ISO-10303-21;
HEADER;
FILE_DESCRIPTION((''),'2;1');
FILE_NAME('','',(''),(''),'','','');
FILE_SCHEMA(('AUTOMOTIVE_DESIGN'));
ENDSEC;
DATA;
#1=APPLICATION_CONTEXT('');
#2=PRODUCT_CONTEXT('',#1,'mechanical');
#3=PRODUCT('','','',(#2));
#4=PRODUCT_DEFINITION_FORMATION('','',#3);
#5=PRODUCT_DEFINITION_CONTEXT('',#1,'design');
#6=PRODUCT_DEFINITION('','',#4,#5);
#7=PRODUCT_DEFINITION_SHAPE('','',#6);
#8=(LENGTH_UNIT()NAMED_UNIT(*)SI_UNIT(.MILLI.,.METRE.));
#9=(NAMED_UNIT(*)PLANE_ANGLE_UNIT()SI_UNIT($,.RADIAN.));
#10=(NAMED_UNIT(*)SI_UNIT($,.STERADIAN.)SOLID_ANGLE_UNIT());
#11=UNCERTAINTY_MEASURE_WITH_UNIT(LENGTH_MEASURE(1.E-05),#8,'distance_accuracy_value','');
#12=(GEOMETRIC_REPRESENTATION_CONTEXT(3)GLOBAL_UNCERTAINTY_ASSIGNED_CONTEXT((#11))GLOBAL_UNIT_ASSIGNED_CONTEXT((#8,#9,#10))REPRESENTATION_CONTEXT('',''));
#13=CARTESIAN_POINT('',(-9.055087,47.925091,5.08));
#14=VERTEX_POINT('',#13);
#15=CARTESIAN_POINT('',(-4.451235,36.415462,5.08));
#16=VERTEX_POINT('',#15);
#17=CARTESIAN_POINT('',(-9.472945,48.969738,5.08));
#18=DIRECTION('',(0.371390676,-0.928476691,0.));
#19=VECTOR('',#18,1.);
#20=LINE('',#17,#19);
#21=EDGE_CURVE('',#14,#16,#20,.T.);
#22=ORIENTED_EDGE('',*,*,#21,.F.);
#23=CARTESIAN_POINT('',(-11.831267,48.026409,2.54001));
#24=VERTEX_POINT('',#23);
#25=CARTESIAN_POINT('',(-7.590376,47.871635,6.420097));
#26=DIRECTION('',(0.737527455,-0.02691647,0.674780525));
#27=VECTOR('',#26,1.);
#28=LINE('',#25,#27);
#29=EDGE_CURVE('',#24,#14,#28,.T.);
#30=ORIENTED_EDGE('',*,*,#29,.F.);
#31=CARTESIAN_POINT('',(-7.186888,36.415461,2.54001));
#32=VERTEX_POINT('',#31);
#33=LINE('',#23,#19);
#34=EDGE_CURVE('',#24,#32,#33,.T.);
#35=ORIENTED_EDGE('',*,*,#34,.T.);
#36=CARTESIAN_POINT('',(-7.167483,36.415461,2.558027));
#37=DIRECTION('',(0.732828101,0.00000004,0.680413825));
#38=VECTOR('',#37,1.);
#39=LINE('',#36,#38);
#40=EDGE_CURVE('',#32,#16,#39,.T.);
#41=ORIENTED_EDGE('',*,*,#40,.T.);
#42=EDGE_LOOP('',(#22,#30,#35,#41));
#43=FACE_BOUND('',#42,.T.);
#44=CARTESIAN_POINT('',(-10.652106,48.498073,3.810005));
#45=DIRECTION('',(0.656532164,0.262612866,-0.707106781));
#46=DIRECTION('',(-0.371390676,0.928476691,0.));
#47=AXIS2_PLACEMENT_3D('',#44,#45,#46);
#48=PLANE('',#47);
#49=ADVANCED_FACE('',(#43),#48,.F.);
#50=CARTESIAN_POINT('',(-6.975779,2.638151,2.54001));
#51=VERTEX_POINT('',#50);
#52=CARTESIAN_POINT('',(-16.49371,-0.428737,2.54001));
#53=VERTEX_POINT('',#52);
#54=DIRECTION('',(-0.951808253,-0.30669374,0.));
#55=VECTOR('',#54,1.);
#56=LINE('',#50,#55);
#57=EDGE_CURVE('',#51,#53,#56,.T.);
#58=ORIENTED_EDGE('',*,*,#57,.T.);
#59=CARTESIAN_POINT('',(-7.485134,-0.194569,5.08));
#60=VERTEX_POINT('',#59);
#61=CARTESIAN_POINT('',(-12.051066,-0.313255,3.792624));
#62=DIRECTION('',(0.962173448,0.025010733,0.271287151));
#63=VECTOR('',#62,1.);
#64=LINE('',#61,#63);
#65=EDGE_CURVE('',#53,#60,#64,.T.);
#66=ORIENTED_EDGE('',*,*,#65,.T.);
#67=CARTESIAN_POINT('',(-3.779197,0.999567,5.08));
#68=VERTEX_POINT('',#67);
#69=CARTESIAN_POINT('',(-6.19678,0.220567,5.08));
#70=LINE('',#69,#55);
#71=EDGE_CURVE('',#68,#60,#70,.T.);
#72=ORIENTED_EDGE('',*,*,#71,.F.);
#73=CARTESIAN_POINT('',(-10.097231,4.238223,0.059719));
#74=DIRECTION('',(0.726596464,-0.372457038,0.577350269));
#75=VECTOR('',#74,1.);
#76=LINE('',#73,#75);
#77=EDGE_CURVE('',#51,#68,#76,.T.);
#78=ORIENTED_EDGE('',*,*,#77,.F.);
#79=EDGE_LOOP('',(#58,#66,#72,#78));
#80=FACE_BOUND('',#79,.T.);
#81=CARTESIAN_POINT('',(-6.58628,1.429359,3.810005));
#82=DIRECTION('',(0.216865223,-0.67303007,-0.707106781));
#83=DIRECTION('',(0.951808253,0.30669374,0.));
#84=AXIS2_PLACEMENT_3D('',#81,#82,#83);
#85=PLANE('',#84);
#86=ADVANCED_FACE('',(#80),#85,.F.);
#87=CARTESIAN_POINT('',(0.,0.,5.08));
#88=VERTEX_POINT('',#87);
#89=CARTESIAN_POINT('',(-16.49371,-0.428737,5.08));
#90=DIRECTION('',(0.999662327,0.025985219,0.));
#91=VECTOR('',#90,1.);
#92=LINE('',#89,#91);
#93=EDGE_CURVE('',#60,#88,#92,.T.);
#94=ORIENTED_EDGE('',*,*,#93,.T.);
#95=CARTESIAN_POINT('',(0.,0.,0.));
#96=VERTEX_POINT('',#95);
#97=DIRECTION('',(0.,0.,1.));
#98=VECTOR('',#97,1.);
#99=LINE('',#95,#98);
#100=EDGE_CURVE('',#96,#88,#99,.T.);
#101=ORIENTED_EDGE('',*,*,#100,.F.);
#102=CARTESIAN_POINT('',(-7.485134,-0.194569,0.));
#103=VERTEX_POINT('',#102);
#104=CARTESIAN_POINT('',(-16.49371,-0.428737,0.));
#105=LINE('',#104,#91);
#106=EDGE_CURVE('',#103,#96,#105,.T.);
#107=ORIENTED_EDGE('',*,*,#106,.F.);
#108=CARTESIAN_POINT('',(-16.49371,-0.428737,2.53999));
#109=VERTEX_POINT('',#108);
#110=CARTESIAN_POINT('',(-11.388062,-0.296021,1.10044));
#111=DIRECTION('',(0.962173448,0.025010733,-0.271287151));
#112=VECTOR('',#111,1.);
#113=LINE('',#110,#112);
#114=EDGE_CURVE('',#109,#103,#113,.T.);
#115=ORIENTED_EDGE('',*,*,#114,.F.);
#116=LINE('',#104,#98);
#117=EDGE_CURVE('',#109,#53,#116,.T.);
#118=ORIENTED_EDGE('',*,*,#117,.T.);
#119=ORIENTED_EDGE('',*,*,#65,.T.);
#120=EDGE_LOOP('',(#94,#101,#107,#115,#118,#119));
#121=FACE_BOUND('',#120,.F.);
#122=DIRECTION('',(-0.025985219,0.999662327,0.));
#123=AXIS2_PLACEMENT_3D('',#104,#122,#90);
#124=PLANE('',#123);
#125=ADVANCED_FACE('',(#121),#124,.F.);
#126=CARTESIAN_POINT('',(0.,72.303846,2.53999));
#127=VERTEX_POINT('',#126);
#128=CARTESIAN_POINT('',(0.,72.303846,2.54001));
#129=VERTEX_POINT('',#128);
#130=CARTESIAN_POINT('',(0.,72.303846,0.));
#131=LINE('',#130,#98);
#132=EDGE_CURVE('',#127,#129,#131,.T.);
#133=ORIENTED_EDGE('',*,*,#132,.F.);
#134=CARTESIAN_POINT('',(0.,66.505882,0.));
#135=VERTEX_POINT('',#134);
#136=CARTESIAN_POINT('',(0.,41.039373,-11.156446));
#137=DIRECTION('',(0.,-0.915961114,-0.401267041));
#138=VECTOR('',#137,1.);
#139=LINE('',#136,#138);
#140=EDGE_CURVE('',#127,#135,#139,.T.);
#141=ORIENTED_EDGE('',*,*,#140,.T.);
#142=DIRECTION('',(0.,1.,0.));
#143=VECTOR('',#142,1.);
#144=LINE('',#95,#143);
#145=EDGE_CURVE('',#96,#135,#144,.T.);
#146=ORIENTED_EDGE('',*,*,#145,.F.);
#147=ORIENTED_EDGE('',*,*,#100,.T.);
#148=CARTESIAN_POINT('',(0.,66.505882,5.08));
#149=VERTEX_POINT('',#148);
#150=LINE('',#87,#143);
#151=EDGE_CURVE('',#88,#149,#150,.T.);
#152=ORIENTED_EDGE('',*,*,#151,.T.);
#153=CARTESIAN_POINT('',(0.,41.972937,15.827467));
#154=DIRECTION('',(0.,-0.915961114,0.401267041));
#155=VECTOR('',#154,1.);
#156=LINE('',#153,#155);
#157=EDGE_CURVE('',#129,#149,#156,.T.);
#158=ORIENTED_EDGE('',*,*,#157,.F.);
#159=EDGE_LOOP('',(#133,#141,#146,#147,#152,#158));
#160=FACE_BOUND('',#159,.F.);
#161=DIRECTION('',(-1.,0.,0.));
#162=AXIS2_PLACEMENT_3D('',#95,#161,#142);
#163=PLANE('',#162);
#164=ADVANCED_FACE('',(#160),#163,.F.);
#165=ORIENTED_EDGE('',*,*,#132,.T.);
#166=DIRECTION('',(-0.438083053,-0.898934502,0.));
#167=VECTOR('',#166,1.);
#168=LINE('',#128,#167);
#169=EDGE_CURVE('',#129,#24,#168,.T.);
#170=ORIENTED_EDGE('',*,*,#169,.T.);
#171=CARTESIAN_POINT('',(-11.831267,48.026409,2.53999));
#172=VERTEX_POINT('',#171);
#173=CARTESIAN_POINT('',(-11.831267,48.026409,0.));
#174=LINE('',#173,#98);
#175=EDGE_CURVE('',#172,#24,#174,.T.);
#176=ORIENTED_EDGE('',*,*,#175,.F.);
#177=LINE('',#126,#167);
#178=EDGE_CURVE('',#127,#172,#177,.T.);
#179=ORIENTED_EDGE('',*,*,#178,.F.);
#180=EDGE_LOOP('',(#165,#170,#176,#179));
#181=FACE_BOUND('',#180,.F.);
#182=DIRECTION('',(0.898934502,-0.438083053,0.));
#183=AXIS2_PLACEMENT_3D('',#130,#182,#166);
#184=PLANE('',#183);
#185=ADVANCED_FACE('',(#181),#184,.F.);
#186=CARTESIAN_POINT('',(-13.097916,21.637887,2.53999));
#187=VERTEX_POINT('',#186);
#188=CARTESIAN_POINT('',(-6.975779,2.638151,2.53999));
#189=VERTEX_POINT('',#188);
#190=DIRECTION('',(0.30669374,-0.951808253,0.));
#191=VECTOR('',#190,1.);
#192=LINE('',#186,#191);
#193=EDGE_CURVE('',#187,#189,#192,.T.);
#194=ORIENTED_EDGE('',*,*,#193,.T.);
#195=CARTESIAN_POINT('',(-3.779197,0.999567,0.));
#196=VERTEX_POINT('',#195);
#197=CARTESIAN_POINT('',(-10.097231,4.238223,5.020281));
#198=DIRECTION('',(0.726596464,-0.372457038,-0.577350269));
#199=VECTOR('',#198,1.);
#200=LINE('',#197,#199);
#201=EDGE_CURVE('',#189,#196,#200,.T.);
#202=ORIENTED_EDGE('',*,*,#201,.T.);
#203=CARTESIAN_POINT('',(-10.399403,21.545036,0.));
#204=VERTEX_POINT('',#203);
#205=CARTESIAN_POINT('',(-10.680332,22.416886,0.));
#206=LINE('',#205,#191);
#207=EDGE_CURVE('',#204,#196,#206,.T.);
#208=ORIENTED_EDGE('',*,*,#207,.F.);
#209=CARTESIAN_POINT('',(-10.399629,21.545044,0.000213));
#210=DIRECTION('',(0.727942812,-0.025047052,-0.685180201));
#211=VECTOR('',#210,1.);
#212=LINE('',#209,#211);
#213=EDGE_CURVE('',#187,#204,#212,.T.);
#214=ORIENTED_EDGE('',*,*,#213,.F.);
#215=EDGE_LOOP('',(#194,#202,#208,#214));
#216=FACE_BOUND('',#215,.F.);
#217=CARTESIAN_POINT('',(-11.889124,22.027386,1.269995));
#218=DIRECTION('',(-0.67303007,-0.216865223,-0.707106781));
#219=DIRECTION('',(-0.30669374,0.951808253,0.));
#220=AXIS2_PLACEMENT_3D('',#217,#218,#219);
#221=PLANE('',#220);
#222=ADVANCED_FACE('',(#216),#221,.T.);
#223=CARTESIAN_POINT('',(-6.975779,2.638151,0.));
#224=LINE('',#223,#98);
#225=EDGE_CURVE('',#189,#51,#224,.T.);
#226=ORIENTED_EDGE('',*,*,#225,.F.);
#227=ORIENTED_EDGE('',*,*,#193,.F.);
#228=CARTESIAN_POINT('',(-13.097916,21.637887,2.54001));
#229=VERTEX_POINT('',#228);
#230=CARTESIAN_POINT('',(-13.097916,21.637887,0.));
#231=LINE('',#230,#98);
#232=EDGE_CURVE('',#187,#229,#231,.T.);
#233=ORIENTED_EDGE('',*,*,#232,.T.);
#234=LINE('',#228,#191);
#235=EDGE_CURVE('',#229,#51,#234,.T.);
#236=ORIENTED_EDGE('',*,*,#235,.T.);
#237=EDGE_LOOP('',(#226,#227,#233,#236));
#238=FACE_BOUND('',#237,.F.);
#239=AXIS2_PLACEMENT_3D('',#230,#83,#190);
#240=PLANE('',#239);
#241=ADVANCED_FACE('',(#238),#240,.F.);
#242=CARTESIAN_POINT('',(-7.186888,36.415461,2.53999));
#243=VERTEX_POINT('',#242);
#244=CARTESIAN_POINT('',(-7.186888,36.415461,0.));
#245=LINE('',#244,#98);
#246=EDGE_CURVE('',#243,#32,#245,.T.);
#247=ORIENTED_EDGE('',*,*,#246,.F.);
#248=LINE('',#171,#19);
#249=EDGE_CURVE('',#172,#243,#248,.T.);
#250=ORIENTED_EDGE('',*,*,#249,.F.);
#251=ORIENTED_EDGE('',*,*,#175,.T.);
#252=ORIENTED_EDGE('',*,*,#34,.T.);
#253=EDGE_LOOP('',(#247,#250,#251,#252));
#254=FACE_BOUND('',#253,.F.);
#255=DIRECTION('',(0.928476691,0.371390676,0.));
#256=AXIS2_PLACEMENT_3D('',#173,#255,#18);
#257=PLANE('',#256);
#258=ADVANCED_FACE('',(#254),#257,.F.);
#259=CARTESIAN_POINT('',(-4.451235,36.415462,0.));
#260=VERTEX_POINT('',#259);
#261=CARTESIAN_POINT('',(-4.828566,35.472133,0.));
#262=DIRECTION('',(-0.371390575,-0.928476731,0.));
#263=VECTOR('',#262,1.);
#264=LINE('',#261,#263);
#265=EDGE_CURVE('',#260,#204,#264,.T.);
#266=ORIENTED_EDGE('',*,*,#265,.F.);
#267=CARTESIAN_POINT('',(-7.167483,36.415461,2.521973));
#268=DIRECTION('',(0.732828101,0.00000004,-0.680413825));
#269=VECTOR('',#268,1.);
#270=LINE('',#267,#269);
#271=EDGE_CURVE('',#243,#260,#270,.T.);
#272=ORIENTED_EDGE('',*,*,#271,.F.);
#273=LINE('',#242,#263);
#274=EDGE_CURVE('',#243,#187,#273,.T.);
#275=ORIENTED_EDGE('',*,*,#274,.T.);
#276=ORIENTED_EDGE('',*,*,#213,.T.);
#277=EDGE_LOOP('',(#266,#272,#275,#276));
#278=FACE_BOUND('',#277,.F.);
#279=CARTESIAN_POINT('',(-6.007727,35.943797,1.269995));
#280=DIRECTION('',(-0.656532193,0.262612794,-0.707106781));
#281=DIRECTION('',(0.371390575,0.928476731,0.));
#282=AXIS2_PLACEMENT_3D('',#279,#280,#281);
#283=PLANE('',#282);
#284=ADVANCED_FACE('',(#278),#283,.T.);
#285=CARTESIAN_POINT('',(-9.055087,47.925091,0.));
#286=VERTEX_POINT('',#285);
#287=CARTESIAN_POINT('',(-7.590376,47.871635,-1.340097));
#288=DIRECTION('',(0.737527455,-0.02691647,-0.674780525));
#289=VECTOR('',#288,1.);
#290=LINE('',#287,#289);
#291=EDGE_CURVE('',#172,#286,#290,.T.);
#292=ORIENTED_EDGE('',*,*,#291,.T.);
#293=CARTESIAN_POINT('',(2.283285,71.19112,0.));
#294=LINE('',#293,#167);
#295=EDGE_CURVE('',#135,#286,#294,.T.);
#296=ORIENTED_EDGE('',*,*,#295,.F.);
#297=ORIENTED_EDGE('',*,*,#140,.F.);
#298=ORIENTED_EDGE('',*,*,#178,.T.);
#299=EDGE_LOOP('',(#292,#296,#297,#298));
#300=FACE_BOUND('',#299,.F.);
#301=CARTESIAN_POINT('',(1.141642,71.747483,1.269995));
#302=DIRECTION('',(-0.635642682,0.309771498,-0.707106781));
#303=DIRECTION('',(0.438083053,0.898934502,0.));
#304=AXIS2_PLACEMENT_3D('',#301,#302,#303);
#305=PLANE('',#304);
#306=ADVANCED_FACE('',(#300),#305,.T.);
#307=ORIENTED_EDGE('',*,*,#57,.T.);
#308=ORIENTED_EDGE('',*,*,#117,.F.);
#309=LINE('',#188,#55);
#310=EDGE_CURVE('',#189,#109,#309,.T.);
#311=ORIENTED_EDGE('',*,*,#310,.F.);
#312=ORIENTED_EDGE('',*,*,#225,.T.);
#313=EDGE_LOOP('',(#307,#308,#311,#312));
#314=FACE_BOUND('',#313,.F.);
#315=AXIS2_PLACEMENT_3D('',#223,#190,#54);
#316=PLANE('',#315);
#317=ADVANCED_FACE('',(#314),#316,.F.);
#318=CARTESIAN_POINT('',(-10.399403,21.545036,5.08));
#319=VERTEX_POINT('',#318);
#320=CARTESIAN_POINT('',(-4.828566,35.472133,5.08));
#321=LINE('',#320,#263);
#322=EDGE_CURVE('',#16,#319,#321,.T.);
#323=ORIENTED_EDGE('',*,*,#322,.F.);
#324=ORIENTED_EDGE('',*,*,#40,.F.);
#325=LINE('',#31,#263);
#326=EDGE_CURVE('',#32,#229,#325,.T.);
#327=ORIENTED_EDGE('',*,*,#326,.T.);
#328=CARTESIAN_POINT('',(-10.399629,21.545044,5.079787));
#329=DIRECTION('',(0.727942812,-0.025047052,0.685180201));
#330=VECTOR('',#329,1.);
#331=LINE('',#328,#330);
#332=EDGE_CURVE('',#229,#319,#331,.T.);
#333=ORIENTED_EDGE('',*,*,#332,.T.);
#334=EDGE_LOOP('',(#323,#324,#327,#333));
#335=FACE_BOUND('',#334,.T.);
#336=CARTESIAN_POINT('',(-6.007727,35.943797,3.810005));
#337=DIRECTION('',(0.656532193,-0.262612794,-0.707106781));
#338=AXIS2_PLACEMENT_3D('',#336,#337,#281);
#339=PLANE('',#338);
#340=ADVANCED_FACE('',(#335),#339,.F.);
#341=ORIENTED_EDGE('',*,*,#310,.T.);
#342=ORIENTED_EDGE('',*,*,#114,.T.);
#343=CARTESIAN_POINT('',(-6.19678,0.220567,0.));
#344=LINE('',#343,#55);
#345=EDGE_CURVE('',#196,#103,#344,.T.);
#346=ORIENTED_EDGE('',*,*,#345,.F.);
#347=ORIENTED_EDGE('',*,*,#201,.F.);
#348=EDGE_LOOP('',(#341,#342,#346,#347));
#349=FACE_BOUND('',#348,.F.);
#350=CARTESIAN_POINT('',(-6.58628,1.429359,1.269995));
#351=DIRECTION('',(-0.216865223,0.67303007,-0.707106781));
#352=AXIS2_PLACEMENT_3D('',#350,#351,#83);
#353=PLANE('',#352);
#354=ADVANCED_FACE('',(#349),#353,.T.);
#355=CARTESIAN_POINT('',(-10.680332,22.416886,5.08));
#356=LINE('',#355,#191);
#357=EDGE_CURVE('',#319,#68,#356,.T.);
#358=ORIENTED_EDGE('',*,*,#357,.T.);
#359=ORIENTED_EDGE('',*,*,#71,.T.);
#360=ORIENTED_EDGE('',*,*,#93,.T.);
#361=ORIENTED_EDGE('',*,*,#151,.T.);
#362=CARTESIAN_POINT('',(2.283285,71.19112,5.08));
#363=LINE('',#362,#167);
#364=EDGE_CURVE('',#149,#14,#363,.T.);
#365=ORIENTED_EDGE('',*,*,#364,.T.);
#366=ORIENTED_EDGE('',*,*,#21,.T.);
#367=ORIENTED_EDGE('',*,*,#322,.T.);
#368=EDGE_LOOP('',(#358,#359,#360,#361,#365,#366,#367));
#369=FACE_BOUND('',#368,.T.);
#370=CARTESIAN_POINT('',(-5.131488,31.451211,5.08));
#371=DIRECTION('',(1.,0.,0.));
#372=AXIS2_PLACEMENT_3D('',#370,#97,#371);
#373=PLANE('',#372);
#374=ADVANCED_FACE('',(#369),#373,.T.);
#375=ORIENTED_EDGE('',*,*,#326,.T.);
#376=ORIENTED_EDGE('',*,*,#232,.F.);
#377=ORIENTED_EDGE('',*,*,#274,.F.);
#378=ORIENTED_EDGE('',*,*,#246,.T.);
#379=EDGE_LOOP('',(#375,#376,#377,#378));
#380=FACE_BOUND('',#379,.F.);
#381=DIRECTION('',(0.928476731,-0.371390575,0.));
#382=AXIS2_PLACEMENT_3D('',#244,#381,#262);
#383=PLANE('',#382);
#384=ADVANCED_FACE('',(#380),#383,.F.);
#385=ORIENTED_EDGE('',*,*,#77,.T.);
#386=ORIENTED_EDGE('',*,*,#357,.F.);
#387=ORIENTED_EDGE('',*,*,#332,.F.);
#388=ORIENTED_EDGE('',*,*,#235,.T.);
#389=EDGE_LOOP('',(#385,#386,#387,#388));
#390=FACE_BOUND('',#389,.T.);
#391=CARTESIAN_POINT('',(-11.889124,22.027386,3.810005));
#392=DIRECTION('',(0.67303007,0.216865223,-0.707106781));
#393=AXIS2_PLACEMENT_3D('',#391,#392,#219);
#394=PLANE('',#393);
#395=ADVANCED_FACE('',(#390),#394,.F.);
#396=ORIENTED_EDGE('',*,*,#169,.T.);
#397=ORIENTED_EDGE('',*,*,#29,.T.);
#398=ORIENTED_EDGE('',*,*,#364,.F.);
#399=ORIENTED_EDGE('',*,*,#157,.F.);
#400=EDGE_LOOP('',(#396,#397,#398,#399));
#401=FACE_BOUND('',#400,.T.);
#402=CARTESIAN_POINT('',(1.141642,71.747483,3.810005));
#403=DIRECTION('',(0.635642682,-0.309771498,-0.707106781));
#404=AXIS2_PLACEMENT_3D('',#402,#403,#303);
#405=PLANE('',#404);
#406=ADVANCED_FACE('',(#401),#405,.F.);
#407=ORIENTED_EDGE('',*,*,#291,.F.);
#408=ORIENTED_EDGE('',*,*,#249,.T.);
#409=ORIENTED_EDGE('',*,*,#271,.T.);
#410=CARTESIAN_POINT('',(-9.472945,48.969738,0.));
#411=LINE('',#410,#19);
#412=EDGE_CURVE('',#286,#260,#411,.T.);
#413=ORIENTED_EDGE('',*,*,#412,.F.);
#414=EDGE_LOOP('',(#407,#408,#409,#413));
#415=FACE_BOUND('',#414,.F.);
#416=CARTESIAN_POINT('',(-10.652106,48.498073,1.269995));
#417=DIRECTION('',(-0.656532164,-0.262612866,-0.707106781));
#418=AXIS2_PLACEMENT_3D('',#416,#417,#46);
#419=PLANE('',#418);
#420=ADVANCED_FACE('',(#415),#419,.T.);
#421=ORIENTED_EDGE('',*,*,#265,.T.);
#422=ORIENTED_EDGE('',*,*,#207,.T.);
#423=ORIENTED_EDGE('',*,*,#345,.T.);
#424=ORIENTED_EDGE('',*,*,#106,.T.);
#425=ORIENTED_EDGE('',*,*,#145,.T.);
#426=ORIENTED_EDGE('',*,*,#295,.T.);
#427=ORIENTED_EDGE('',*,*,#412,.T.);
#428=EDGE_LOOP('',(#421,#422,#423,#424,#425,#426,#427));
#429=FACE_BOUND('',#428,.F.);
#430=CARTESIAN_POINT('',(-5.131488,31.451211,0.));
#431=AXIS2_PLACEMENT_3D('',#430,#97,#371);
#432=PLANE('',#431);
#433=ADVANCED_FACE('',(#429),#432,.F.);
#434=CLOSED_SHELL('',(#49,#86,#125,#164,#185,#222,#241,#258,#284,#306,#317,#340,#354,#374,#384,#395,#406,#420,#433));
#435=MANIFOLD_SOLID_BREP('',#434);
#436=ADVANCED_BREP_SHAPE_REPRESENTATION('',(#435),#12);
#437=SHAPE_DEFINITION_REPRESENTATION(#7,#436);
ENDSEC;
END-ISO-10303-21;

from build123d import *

# Parameters (mm, degrees)
F1_DEPTH = 5.08
F2_SIZE  = 2.53999


# Not quite as in the source:
# - a fillet or chamfer is up to 0.001 mm smaller than in the source, because OpenCascade refuses the exact size


with BuildPart() as f1:
    # F0 (on Top) → F1 (new body)
    with BuildSketch(Plane.XY):
        Polygon((0, 0), (0, 72.3038464785), (-11.8312668055, 48.0264090002), (-7.1868877858, 36.4154614508), (-13.0979157984, 21.6378867626), (-6.9757793099, 2.6381509379), (-16.4937096578, -0.428737424), align=None)
    extrude(amount=F1_DEPTH)

    # F2 (size 2.54 in the source; OpenCascade refuses exactly that, so slightly less here)
    f2_edges = [f1.edges().sort_by_distance(p)[0] for p in [
        (-5.915633, 60.165128, 5.08),
        (-9.509077, 42.220935, 5.08),
        (-10.142402, 29.026674, 5.08),
        (-10.036848, 12.138019, 5.08),
        (-11.734744, 1.104707, 5.08),
        (-5.915633, 60.165128, 0),
        (-9.509077, 42.220935, 0),
        (-10.142402, 29.026674, 0),
        (-10.036848, 12.138019, 0),
        (-11.734744, 1.104707, 0),
    ]]
    chamfer(f2_edges, length=F2_SIZE)


solid = f1.part
